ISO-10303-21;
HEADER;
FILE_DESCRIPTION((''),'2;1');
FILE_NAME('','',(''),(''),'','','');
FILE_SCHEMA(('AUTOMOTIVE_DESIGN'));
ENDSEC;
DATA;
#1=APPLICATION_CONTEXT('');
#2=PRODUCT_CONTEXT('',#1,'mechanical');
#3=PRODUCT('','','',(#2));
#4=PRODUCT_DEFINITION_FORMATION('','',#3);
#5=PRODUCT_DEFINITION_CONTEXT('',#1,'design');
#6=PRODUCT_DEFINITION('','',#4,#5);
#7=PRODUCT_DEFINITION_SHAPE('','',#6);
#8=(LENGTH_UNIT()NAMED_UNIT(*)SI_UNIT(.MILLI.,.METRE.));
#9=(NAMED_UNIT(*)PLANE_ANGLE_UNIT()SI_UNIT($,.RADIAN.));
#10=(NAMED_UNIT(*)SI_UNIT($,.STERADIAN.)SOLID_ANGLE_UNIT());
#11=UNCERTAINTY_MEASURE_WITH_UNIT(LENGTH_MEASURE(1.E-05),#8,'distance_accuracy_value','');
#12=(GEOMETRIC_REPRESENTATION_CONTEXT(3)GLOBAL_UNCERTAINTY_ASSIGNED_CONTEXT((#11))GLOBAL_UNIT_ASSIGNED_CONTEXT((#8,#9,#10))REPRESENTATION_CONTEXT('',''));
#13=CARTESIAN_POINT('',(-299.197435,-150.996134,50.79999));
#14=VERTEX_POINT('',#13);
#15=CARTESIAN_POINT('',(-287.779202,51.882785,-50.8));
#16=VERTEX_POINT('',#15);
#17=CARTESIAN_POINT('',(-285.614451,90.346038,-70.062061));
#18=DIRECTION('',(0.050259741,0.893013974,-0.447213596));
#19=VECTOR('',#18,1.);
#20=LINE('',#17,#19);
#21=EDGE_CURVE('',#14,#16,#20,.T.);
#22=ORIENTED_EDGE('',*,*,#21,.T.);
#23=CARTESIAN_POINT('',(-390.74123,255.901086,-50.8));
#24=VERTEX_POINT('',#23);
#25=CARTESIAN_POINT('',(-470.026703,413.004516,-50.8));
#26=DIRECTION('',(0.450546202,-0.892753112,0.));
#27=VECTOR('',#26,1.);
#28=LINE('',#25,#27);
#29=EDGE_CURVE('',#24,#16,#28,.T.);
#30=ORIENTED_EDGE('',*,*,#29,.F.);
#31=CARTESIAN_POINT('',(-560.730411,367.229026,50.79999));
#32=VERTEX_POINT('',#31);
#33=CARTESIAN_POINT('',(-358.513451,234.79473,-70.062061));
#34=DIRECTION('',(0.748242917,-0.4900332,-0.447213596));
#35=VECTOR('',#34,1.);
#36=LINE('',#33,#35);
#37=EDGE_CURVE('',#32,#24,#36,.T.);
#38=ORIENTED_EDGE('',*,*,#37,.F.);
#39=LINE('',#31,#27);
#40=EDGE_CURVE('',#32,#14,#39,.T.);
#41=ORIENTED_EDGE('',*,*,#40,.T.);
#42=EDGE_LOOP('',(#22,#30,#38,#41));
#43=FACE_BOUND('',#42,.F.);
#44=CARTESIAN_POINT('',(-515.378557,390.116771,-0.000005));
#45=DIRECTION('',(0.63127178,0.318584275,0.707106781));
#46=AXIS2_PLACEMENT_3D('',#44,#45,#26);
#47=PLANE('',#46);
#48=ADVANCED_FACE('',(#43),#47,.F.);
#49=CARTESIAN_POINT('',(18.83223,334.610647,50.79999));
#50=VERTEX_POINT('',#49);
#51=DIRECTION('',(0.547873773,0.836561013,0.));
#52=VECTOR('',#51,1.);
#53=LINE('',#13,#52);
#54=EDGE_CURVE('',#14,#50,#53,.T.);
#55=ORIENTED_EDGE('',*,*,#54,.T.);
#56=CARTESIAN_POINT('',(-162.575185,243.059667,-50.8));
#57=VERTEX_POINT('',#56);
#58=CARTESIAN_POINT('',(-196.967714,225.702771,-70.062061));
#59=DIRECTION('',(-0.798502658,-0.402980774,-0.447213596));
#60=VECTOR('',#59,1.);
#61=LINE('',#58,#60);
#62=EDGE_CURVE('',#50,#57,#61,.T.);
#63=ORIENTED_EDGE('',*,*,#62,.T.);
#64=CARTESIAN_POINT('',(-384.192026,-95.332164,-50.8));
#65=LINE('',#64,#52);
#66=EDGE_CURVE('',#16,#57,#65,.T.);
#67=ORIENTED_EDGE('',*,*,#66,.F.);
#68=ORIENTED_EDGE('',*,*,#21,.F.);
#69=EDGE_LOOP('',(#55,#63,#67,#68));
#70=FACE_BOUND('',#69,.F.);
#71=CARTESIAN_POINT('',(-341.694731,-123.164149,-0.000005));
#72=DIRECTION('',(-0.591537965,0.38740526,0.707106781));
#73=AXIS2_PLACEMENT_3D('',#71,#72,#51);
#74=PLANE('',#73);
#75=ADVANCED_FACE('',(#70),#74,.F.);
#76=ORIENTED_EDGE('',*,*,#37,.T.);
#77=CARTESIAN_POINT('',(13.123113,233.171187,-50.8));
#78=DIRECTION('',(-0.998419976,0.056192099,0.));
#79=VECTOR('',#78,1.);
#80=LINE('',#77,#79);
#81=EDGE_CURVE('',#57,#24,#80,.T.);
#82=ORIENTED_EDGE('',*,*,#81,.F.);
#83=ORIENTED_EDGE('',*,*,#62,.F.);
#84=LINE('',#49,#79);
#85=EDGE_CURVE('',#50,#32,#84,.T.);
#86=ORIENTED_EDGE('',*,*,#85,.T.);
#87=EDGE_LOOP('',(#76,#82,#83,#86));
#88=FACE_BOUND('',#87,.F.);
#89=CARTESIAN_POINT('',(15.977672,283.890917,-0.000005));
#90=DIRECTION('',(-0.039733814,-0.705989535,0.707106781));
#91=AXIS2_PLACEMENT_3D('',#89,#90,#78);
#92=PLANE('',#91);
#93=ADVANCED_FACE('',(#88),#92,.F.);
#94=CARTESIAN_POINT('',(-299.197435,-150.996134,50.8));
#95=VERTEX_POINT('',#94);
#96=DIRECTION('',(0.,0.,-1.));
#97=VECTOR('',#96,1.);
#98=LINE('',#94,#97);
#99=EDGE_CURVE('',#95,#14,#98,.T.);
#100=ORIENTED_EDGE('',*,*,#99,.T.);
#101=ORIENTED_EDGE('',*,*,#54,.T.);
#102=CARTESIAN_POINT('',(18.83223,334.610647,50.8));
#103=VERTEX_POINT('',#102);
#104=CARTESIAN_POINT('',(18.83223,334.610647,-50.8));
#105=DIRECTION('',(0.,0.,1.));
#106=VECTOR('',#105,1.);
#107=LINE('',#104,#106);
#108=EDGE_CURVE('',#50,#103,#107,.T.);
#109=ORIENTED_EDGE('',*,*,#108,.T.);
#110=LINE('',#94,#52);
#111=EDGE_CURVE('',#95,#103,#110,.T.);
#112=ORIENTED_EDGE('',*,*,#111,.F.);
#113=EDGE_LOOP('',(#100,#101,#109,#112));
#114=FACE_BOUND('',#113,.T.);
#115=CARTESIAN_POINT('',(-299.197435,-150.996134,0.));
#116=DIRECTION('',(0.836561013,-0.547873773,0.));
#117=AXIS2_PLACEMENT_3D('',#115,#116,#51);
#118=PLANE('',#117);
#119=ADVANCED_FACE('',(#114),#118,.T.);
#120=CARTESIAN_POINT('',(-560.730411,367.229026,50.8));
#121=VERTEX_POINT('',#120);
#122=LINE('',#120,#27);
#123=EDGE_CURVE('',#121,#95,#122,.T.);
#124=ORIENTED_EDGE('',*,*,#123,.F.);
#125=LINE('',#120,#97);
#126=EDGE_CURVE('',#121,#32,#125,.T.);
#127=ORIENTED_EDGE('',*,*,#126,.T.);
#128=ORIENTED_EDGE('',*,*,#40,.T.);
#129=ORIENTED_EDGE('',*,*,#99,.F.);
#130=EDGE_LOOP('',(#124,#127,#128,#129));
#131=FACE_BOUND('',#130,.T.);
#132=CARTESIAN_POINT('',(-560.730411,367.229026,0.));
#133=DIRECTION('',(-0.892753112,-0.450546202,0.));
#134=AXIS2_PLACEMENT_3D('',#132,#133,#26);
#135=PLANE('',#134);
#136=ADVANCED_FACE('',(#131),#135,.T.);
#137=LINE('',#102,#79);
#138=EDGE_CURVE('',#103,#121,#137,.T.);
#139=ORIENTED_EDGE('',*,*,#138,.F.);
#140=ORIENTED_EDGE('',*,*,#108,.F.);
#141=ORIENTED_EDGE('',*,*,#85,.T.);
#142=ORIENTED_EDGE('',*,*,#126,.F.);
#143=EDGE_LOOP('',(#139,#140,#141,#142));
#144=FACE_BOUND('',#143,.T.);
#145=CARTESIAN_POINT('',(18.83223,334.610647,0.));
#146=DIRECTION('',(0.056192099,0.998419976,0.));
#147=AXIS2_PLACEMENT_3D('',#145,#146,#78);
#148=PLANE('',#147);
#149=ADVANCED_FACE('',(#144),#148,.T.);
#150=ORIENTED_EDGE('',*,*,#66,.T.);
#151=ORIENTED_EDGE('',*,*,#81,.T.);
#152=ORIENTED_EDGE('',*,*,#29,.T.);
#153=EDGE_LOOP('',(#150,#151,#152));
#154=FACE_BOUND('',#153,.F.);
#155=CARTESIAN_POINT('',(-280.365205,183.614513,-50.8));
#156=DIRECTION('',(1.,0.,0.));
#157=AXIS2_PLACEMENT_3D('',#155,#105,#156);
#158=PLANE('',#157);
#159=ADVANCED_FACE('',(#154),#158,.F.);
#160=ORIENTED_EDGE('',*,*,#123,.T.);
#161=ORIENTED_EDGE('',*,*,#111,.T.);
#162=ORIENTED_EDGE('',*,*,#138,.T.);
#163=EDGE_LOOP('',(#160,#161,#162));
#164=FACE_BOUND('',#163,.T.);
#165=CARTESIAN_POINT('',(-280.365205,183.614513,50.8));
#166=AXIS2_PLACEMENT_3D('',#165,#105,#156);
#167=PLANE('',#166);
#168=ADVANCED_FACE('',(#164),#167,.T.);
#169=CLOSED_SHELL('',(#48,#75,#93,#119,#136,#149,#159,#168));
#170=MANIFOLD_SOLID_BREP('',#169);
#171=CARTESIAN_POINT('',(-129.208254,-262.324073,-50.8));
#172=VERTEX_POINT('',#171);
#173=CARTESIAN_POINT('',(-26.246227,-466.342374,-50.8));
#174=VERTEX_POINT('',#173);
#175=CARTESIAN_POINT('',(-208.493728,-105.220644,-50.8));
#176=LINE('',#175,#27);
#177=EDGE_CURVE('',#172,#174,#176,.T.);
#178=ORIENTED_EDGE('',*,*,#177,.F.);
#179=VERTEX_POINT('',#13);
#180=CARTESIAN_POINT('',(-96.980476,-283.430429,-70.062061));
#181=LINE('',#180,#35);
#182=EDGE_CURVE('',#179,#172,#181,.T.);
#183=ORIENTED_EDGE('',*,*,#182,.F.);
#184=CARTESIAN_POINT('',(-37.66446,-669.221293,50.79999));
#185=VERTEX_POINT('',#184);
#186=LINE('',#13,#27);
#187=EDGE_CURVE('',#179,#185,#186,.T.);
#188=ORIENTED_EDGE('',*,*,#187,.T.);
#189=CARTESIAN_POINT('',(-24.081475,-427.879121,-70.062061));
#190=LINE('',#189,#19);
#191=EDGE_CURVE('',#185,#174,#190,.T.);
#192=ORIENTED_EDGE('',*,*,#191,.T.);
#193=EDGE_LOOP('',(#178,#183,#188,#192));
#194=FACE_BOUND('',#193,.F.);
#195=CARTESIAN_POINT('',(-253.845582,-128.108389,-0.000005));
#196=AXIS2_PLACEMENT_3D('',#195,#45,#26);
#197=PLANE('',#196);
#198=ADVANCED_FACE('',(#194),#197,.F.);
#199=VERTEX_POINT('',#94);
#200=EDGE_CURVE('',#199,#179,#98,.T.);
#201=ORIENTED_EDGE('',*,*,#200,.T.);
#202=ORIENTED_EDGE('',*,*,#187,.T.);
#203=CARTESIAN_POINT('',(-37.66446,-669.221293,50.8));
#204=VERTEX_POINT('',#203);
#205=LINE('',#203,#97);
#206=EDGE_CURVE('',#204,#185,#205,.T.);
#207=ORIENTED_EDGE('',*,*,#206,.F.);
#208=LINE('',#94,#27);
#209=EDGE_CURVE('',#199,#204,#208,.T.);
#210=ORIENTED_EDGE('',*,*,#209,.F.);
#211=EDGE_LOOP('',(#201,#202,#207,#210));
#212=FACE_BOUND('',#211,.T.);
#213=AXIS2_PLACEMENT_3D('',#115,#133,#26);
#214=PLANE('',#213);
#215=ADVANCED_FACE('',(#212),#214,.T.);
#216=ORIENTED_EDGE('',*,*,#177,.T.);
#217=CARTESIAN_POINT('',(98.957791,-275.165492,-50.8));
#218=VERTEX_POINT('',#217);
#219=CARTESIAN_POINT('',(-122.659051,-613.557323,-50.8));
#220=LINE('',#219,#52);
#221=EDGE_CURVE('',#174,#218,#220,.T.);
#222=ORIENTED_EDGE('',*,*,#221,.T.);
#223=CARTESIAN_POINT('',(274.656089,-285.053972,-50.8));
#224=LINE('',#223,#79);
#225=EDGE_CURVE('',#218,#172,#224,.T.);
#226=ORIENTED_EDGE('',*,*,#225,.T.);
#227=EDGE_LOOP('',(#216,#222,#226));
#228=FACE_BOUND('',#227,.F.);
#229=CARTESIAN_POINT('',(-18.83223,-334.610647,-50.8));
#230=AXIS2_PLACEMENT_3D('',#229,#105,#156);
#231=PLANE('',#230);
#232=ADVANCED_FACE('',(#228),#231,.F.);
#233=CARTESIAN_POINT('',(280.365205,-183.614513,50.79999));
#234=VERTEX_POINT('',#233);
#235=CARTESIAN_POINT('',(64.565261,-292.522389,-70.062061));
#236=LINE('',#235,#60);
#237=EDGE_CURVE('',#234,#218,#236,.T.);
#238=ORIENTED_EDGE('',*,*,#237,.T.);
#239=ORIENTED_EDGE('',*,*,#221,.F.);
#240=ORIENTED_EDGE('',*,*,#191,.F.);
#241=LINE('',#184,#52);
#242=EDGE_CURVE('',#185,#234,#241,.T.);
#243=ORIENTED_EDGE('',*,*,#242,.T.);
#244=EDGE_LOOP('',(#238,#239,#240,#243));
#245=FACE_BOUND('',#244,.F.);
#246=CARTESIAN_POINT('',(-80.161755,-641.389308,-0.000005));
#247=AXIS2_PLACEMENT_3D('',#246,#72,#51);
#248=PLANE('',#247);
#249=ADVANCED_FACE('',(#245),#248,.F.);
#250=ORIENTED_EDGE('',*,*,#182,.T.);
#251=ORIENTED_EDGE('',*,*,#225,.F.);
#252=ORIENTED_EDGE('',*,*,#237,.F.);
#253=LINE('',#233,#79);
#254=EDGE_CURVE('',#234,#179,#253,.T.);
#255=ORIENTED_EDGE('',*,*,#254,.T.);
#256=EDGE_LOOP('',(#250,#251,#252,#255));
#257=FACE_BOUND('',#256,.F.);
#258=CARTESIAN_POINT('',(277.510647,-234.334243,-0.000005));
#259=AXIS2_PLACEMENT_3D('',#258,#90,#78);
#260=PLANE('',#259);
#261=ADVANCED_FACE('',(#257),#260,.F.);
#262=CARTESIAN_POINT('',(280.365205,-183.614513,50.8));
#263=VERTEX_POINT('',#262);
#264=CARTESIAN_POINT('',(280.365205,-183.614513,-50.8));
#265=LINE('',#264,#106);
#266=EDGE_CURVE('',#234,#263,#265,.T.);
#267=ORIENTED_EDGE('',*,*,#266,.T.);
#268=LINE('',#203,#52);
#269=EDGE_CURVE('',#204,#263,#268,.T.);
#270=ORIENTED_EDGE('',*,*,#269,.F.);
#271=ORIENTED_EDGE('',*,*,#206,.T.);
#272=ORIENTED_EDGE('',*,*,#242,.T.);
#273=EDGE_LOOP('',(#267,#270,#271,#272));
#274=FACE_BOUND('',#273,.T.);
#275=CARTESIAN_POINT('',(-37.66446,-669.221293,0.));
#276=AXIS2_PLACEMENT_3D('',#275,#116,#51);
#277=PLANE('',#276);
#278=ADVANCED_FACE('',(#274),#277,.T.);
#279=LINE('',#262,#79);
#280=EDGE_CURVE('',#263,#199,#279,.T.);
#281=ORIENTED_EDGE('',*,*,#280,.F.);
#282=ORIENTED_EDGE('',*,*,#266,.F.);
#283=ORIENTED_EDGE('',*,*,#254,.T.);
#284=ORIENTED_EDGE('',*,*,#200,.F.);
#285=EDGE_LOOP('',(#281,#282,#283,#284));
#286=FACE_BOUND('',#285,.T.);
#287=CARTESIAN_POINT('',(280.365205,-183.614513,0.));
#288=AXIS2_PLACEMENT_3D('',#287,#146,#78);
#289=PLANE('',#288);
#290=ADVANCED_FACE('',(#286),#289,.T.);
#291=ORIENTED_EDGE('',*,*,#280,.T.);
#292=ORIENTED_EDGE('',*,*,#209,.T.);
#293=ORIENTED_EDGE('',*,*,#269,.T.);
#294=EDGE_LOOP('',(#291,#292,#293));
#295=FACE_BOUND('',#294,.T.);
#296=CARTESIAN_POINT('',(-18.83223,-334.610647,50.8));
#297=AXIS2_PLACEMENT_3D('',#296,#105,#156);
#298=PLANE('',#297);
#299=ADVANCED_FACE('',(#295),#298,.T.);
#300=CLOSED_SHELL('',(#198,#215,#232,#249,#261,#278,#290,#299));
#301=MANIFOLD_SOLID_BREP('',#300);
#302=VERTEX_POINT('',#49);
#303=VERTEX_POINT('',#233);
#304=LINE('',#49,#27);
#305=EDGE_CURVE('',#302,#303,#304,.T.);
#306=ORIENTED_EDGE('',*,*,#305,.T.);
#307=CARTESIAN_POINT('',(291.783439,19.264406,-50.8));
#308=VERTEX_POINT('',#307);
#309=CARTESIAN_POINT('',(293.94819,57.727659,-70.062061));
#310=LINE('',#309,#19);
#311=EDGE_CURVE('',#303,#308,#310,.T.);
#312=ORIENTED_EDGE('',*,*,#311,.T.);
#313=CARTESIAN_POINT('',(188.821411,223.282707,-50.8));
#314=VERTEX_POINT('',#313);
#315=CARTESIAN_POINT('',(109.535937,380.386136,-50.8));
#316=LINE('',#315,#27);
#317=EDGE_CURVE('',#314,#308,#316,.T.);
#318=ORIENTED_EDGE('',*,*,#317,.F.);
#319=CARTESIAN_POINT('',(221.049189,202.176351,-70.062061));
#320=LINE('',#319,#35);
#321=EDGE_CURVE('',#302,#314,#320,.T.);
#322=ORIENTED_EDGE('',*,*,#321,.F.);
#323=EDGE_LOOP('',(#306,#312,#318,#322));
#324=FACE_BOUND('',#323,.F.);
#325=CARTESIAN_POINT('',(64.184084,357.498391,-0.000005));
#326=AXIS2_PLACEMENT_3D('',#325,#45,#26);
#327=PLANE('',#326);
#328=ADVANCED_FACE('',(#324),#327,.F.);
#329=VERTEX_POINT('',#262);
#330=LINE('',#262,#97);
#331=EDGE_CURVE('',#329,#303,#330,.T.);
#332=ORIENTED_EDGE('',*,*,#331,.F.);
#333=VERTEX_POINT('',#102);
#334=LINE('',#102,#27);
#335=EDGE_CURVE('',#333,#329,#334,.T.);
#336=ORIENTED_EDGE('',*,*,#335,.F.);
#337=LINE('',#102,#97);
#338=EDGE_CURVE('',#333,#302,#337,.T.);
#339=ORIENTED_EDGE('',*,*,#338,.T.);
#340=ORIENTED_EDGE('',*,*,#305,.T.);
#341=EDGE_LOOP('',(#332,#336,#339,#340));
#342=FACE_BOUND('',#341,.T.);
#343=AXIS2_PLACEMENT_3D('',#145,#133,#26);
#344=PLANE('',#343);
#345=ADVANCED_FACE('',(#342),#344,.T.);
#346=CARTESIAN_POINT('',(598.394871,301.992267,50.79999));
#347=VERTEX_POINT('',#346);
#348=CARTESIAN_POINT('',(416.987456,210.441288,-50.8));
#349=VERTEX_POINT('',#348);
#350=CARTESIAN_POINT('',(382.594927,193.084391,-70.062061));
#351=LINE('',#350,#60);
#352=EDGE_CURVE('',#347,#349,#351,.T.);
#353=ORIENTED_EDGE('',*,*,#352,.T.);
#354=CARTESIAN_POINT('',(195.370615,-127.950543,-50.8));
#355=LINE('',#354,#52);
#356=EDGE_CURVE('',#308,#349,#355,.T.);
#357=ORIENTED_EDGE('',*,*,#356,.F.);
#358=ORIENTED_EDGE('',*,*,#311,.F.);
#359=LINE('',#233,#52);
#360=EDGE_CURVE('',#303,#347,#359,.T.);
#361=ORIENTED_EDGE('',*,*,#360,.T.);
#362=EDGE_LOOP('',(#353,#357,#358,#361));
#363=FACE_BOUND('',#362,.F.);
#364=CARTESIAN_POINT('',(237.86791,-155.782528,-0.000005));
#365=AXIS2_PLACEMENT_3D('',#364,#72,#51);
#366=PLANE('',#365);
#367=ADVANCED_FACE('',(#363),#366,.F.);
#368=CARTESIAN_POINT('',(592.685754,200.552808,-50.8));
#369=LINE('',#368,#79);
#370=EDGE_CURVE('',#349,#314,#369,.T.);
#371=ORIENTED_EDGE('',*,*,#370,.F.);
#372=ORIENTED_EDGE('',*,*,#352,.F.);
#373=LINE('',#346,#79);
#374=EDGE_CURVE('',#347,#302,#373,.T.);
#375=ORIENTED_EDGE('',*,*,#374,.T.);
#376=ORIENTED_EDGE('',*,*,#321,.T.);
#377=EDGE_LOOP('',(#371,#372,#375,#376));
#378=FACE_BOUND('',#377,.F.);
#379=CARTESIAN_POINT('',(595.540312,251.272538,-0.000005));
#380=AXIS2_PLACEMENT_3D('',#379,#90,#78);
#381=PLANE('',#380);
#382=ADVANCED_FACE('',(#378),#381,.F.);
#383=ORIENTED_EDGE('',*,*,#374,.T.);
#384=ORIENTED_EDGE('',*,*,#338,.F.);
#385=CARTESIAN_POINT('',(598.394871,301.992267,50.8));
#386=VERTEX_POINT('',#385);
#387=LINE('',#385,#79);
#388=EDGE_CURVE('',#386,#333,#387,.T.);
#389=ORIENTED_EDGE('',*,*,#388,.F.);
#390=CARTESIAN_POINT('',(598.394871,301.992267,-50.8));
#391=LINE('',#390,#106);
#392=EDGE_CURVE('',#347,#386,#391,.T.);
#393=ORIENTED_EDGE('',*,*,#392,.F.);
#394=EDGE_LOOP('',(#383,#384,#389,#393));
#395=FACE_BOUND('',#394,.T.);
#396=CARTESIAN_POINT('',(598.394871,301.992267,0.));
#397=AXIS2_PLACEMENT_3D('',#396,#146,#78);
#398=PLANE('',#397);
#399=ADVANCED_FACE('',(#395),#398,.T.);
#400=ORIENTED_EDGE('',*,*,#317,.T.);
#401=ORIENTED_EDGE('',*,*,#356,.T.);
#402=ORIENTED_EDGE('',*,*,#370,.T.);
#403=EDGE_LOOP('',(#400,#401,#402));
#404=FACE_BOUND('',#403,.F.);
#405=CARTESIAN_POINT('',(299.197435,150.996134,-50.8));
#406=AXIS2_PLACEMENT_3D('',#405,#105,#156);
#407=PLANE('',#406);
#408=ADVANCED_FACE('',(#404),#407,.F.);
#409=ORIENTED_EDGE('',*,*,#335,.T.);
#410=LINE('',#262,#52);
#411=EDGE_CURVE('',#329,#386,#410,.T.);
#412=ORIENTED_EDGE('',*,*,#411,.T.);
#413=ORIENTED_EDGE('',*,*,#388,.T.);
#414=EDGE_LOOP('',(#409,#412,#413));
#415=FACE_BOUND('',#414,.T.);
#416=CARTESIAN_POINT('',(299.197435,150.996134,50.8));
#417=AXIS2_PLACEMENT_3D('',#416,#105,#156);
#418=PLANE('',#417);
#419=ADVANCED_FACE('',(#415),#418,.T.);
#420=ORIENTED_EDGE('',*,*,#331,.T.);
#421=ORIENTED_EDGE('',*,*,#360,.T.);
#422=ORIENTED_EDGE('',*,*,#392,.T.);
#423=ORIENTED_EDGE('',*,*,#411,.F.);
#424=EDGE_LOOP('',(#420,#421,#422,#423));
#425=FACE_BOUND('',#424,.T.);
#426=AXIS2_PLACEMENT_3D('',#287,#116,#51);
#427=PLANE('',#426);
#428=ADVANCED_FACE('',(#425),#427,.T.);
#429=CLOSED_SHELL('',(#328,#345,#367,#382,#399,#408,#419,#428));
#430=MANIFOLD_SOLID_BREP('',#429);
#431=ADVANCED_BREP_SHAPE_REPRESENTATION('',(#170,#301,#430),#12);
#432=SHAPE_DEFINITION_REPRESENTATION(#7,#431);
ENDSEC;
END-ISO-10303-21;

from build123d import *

# Parameters (mm, degrees)
F1_DEPTH  = 50.8
F2_SIZE   = 101.59999
F2_2_SIZE = 101.59999
F2_3_SIZE = 101.59999


# Not quite as in the source:
# - a fillet or chamfer is up to 0.001 mm smaller than in the source, because OpenCascade refuses the exact size


with BuildPart() as f1:
    # F0 (on Top) → F1 (new body, symmetric)
    with BuildSketch(Plane.XY):
        Polygon((280.3652053341, -183.6145129428), (598.3948707581, 301.9922673702), (18.832230045, 334.6106466279), align=None)
    extrude(amount=F1_DEPTH, both=True)

    # F2 (size 101.6 in the source; OpenCascade refuses exactly that, so slightly less here)
    f2_edges = [f1.edges().sort_by_distance(p)[0] for p in [
        (308.61355, 318.301457, -50.8),
        (439.380038, 59.188877, -50.8),
        (149.598718, 75.498067, -50.8),
    ]]
    chamfer(f2_edges, length=F2_SIZE)


with BuildPart() as f1b:
    # F0 (on Top) → F1, piece 2 (new body, symmetric)
    with BuildSketch(Plane.XY):
        Polygon((-37.66446009, -669.2212932559), (280.3652053341, -183.6145129428), (-299.197435379, -150.9961336851), align=None)
    extrude(amount=F1_DEPTH, both=True)

    # F2#2 (size 101.6 in the source; OpenCascade refuses exactly that, so slightly less here)
    f2_2_edges = [f1b.edges().sort_by_distance(p)[0] for p in [
        (-9.416115, -167.305323, -50.8),
        (121.350373, -426.417903, -50.8),
        (-168.430948, -410.108713, -50.8),
    ]]
    chamfer(f2_2_edges, length=F2_2_SIZE)


with BuildPart() as f1c:
    # F0 (on Top) → F1, piece 3 (new body, symmetric)
    with BuildSketch(Plane.XY):
        Polygon((-299.197435379, -150.9961336851), (18.832230045, 334.6106466279), (-560.7304106681, 367.2290258857), align=None)
    extrude(amount=F1_DEPTH, both=True)

    # F2#3 (size 101.6 in the source; OpenCascade refuses exactly that, so slightly less here)
    f2_3_edges = [f1c.edges().sort_by_distance(p)[0] for p in [
        (-429.963923, 108.116446, -50.8),
        (-270.94909, 350.919836, -50.8),
        (-140.182603, 91.807256, -50.8),
    ]]
    chamfer(f2_3_edges, length=F2_3_SIZE)


solid = Compound([f1.part, f1b.part, f1c.part])
